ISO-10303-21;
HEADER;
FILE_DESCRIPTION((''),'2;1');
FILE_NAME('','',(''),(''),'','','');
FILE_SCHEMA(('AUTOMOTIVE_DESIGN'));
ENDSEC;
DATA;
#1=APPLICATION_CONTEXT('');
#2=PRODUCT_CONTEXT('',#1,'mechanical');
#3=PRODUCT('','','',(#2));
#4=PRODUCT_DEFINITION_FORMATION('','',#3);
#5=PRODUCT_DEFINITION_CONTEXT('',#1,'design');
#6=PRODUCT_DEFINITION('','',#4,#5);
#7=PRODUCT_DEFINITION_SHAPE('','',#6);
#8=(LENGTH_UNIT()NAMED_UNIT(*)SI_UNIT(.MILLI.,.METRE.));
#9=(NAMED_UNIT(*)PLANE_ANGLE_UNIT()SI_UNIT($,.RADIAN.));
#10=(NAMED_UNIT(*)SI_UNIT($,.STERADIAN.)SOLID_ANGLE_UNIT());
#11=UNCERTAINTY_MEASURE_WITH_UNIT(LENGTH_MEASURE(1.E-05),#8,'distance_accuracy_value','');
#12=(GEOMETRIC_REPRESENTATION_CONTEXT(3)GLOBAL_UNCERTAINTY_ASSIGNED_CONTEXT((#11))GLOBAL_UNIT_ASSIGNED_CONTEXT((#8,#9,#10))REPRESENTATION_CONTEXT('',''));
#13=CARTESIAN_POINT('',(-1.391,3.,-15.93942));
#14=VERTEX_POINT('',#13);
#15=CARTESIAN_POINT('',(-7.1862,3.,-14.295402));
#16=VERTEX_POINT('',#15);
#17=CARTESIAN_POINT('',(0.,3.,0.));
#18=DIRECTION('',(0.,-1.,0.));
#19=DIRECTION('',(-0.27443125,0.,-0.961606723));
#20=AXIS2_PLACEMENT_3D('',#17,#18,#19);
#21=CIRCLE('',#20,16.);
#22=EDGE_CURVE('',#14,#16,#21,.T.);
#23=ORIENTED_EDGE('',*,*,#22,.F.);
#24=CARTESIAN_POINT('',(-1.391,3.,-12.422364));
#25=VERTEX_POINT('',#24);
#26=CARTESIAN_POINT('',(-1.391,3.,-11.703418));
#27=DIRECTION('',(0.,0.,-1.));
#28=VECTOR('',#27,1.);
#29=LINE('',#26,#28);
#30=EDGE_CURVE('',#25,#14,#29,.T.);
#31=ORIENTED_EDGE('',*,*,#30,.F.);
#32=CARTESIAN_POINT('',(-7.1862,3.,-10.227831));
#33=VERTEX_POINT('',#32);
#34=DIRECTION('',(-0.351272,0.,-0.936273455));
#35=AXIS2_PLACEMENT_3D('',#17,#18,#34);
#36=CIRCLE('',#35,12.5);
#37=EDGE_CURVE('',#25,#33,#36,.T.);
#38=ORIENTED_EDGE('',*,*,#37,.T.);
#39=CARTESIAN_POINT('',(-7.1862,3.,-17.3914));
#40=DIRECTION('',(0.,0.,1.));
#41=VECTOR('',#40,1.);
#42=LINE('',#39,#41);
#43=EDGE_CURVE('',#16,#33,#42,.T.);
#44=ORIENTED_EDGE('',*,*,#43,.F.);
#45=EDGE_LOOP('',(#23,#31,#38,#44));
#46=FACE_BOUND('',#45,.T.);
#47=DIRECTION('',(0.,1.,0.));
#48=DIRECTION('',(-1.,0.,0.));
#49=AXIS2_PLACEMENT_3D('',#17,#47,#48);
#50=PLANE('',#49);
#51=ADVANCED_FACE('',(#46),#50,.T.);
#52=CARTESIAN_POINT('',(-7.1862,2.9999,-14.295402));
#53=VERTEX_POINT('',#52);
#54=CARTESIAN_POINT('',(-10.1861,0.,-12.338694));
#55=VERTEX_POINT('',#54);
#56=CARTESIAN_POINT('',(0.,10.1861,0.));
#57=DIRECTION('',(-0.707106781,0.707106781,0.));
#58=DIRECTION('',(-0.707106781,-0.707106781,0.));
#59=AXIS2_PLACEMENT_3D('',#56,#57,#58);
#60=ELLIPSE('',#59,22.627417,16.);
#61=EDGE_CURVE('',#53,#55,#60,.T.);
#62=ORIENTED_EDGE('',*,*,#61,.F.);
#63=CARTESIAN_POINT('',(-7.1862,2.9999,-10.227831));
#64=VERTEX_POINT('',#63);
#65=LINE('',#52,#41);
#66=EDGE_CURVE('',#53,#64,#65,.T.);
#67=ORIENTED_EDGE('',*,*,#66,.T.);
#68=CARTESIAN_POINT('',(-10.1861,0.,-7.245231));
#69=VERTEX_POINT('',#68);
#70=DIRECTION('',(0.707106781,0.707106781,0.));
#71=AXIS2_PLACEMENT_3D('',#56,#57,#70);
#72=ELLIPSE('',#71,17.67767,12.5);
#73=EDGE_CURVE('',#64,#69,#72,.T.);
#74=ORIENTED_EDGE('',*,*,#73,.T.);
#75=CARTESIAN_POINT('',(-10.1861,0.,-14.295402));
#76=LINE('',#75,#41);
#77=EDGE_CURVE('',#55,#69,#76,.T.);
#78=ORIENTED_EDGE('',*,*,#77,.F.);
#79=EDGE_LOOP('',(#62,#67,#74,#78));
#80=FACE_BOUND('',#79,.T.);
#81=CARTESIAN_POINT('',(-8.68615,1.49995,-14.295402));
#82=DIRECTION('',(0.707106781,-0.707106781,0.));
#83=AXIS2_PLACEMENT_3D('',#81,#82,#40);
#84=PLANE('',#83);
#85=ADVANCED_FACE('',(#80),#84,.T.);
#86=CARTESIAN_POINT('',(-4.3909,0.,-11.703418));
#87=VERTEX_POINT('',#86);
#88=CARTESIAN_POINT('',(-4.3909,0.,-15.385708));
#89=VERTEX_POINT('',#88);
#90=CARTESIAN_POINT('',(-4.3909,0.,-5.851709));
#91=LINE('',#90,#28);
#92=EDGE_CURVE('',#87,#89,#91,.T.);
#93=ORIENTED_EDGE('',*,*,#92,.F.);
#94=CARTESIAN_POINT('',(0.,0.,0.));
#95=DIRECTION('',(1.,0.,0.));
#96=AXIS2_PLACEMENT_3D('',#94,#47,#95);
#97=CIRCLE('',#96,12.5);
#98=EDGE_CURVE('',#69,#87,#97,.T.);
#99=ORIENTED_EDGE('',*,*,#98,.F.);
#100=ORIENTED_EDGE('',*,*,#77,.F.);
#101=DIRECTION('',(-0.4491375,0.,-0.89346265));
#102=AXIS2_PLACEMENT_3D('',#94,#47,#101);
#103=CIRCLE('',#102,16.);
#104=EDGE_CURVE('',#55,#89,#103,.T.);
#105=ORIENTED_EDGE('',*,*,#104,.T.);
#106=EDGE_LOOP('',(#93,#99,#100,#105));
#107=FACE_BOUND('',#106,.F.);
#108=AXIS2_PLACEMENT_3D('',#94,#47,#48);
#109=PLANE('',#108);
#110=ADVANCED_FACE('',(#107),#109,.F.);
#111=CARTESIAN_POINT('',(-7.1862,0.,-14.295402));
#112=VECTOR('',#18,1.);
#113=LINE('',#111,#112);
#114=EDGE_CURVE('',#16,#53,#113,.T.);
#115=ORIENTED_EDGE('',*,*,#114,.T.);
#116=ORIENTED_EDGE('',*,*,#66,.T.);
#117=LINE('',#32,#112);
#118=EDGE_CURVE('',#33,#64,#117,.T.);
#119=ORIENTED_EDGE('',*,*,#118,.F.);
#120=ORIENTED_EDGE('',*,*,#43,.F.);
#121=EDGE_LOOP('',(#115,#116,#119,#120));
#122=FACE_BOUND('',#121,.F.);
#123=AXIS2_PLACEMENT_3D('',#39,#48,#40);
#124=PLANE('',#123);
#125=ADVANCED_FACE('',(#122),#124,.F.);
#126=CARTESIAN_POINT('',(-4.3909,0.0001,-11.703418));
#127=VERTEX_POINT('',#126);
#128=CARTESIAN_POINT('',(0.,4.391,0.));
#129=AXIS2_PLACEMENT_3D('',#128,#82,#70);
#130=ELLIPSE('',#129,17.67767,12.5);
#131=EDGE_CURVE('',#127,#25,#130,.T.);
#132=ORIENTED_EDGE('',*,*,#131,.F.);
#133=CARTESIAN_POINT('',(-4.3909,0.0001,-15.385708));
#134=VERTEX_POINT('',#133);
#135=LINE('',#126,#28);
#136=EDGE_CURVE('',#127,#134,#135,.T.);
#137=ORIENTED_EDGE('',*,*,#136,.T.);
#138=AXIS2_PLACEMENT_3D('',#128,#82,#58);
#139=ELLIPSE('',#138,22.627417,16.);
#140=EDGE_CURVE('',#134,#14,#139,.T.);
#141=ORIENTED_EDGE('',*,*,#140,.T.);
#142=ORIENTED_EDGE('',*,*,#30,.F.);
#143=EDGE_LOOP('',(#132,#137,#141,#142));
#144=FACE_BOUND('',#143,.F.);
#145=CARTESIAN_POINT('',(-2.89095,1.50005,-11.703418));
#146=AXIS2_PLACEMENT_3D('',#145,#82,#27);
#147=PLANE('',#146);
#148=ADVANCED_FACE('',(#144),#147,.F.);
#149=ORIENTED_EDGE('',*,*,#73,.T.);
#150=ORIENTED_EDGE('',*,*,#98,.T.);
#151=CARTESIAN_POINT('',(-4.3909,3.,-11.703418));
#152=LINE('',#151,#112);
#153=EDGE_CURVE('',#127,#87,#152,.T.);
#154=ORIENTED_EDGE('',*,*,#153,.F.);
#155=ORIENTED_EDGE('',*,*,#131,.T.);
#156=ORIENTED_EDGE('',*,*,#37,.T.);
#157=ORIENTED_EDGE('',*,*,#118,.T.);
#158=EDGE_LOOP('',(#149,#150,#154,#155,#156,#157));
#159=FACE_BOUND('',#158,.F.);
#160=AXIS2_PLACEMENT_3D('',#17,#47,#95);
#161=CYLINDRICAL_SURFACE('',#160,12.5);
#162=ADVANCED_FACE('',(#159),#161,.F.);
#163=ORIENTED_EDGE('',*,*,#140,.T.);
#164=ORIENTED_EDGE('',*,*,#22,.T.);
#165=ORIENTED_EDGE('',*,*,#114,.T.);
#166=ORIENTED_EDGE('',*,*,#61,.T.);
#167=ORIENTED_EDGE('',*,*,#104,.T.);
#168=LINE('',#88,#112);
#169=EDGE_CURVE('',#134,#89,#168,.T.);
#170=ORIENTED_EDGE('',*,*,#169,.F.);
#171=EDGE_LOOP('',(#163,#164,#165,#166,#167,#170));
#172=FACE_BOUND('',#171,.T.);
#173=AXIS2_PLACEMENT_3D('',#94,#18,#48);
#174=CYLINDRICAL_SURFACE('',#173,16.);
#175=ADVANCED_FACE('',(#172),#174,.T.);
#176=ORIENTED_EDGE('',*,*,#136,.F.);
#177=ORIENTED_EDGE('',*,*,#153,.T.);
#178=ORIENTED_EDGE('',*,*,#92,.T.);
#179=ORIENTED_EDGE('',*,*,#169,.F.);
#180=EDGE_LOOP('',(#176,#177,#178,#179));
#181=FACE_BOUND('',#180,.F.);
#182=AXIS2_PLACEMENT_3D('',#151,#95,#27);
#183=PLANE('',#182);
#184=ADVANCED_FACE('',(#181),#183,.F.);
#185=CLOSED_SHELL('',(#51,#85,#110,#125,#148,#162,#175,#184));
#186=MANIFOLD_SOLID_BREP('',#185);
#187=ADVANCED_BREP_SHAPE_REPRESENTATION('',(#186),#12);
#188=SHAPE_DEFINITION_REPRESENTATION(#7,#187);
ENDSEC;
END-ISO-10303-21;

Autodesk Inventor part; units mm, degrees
ref_plane "YZ Plane" through (0, 0, 0) normal (1, 0, 0) x (0, 1, 0)
ref_plane "XZ Plane" through (0, 0, 0) normal (0, 1, 0) x (-1, 0, 0)
ref_plane "XY Plane" through (0, 0, 0) normal (0, 0, 1) x (1, 0, 0)
sketch "Sketch1" plane through (0, 0, 0) normal (0, 1, 0) x (-1, 0, 0)
  circle A0 centre (0, 0) radius 16
  dimension "d74" = 32
extrude "Extrusion3" add sketch "Sketch1" along normal blind 3
sketch "Sketch4" plane through (0, 3, 0) normal (0, 1, 0) x (1, 0, 0)
  circle A0 centre (0, 0) radius 12.5
  line L0 (-4.3909, 10.9342) -> (-4.3909, 17.3914)
  line L1 (-4.3909, 17.3914) -> (-7.1862, 17.3914)
  line L2 (-7.1862, 17.3914) -> (-7.1862, 9.3059)
  line L3 (-7.1862, 9.3059) -> (-4.3909, 9.3059)
  line L4 (-4.3909, 9.3059) -> (-4.3909, 10.9342)
  dimension "d77" = 25
extrude "Extrusion4" cut sketch "Sketch4" against normal through all
chamfer "Chamfer3" distance 3 angle 45 1 edges at (-4.3909, 3, -13.5446)
chamfer "Chamfer4" distance 3 angle 45 1 edges at (-7.1862, 0, -12.2616)
properties part number "reverse gear piston gear"
